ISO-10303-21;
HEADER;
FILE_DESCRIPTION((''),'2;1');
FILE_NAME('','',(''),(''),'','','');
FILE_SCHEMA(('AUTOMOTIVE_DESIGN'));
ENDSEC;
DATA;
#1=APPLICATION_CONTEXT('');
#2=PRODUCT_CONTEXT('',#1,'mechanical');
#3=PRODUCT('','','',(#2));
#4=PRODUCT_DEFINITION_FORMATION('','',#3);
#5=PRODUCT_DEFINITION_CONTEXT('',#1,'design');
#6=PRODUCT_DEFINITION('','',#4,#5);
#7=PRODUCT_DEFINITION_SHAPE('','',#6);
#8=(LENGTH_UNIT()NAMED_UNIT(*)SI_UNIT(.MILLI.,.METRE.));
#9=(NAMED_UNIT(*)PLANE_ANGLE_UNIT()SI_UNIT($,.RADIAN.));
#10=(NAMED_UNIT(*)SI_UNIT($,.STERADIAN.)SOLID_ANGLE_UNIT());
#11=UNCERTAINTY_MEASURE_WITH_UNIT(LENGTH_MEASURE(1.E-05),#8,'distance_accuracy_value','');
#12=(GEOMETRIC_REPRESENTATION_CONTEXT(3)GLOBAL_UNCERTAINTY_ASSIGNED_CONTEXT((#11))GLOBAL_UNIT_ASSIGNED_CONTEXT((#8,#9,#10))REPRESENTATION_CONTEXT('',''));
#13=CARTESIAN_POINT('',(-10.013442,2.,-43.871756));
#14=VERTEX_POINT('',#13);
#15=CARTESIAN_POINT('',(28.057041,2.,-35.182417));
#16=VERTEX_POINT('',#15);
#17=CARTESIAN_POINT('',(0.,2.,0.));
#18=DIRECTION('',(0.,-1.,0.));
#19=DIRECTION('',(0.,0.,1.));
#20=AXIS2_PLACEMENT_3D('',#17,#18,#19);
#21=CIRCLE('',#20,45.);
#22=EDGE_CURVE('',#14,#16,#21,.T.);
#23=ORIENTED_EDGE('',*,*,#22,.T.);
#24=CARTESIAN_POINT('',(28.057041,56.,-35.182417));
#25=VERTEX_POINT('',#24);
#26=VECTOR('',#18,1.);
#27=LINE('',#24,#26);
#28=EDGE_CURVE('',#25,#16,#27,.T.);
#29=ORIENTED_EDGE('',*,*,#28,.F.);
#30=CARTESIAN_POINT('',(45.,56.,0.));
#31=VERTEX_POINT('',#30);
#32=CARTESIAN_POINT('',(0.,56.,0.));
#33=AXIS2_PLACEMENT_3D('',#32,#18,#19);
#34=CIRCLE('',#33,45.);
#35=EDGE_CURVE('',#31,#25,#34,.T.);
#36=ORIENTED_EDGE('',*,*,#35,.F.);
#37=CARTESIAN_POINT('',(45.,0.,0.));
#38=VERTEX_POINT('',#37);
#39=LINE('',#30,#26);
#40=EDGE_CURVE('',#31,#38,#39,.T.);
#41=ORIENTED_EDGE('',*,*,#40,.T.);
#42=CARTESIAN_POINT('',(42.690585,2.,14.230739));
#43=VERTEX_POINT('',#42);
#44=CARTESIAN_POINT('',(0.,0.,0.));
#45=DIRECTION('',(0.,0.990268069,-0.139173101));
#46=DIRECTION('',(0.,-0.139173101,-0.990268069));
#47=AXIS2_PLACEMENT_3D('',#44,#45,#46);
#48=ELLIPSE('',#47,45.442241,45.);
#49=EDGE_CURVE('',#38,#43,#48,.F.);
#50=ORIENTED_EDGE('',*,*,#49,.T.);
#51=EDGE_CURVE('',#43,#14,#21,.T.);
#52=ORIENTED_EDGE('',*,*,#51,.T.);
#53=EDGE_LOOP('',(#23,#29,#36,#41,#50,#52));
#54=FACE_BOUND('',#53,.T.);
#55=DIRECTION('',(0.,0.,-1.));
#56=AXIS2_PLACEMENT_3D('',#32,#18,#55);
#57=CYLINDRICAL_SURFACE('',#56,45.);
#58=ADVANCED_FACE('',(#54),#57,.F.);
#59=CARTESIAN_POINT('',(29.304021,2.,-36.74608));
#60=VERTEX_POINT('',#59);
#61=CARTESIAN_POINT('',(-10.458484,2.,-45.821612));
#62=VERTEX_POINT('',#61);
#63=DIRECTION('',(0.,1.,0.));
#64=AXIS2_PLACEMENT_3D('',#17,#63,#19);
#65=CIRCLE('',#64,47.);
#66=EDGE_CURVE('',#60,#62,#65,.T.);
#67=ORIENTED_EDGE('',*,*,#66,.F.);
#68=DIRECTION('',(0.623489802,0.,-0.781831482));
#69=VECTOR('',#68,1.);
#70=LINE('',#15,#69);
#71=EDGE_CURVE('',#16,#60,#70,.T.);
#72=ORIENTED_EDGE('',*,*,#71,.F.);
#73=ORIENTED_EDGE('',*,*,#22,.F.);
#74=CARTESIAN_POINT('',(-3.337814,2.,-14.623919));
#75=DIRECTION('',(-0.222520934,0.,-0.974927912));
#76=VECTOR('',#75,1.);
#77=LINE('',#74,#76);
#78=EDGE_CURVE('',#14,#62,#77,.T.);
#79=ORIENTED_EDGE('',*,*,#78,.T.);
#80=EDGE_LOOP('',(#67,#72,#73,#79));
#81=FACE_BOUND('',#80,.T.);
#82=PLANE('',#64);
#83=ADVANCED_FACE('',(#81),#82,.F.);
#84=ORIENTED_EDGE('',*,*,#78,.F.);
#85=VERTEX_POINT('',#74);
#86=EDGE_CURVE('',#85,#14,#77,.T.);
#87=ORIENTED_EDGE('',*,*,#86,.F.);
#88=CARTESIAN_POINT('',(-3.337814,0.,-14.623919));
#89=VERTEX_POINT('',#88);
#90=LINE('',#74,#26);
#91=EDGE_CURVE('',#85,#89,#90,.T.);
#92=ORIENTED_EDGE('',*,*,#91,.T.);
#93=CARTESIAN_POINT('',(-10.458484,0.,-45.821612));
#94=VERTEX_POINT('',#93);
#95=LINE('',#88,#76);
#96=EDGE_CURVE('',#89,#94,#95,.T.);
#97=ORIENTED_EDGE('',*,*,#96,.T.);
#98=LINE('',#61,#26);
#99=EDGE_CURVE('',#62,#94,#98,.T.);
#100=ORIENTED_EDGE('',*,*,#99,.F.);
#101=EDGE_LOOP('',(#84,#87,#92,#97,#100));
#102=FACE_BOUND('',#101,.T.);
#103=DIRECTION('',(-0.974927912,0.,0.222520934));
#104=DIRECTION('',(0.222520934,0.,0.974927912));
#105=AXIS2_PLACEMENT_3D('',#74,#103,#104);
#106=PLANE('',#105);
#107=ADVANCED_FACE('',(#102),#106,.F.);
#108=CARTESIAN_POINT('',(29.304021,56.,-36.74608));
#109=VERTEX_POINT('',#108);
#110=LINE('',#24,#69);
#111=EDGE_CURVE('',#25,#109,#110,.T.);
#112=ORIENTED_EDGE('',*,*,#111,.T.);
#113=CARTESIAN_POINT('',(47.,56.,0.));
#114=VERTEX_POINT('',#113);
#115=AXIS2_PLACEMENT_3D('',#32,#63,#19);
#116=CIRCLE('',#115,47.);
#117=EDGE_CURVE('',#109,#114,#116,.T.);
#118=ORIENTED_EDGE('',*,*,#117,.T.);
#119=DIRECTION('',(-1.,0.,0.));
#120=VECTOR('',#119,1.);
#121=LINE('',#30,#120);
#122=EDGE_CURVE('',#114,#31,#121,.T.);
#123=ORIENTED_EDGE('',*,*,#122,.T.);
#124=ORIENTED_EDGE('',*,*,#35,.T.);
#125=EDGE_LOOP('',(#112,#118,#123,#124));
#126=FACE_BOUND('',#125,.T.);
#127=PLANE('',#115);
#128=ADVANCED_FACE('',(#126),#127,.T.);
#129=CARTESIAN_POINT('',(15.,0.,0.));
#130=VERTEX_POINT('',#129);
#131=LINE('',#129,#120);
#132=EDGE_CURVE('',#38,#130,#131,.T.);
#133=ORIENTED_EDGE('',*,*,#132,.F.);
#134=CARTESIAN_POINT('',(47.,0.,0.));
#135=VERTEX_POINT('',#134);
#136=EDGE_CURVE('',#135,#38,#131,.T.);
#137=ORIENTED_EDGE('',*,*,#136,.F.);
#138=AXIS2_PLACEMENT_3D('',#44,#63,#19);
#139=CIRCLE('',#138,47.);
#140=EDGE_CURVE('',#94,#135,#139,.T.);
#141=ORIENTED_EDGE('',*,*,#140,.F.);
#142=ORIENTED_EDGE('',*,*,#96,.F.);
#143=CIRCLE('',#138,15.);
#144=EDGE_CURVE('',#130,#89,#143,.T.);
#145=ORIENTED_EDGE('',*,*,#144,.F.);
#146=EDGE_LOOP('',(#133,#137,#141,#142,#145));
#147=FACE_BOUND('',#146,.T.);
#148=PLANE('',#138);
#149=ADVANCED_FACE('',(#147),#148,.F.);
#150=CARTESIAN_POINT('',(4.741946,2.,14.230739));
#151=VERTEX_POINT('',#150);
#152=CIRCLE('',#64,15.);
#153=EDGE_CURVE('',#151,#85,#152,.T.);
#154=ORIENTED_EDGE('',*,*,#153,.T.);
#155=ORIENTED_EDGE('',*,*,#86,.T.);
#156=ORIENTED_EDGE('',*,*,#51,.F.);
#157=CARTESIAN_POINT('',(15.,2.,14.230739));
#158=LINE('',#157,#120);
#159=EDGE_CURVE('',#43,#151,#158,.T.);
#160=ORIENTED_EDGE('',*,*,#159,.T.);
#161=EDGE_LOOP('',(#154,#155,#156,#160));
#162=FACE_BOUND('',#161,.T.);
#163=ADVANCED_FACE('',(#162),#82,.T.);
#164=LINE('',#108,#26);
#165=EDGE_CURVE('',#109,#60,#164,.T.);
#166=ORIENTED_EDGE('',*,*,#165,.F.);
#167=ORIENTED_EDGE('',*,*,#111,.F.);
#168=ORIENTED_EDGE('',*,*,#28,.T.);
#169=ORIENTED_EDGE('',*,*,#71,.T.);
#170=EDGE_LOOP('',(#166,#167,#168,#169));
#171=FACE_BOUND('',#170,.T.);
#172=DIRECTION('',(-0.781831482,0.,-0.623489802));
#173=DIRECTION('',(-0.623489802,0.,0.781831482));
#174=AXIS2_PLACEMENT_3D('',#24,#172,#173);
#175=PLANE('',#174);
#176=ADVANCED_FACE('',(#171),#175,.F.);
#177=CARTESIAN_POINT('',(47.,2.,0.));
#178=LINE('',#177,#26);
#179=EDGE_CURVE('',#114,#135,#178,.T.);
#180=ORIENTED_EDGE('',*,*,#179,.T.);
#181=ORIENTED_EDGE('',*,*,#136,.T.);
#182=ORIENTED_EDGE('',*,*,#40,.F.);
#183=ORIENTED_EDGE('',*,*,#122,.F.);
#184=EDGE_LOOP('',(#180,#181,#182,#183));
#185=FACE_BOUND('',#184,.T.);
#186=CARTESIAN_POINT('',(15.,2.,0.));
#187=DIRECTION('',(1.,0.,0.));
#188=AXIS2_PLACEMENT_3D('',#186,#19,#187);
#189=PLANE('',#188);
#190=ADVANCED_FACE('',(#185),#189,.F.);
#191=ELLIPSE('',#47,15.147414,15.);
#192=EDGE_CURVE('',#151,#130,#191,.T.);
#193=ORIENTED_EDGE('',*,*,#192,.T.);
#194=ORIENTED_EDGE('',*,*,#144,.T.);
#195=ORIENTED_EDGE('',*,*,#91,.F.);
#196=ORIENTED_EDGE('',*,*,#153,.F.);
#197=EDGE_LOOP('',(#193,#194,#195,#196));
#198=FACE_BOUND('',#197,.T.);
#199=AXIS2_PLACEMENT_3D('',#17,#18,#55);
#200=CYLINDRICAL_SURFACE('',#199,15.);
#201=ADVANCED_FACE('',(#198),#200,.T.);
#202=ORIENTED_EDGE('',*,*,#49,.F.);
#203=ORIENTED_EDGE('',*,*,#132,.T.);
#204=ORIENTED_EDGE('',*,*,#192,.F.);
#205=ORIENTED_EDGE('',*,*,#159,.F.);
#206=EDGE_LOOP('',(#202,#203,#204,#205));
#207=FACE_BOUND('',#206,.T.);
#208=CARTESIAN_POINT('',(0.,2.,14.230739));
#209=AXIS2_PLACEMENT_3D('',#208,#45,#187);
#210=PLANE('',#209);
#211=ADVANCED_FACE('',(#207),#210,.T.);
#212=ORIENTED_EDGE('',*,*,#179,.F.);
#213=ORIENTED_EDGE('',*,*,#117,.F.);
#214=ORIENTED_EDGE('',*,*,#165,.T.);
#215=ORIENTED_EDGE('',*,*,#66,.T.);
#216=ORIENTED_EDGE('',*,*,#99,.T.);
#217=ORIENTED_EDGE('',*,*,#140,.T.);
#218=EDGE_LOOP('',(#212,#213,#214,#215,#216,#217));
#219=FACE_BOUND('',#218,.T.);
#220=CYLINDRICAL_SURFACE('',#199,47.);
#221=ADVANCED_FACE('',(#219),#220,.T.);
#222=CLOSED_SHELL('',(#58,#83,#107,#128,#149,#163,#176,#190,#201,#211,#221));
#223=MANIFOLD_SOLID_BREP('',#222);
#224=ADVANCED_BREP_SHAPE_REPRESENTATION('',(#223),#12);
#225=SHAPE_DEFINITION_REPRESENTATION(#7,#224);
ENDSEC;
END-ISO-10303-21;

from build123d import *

# Parameters (mm, degrees)
BOSS_EXTRUDE1_DEPTH = 2
BOSS_EXTRUDE2_DEPTH = 54
CHAMFER1_SIZE2      = 14.230739445
CHAMFER1_SIZE       = 2


with BuildPart() as part:
    # Sketch1 → Boss-Extrude1 (new body)
    with BuildSketch(Plane(origin=(0, 0, 0), x_dir=(1, 0, 0), z_dir=(0, 1, 0))):
        with BuildLine():
            Line((-3.337814009, 14.623918683), (-10.458483896, 45.821611873))
            ThreePointArc((-10.458483896, 45.821611873), (-29.304020687, -36.746079676), (47, 0))
            Line((47, 0), (15, 0))
            ThreePointArc((15, 0), (9.352347028, 11.727472237), (-3.337814009, 14.623918683))
        make_face()
    extrude(amount=BOSS_EXTRUDE1_DEPTH)

    # Sketch2 → Boss-Extrude2 (add)
    with BuildSketch(Plane(origin=(0, 2, 0), x_dir=(1, 0, 0), z_dir=(0, 1, 0))):
        with BuildLine():
            Line((28.057041084, 35.182416711), (29.304020687, 36.746079676))
            ThreePointArc((29.304020687, 36.746079676), (-42.345536791, -20.392535739), (47, 0))
            Line((47, 0), (45, 0))
            ThreePointArc((45, 0), (-40.543599056, -19.52476826), (28.057041084, 35.182416711))
        make_face()
    extrude(amount=BOSS_EXTRUDE2_DEPTH)

    # Chamfer1
    chamfer1_edges = [part.edges().sort_by_distance(p)[0] for p in [
        (30, 2, 0),
    ]]
    chamfer1_side = [part.faces().sort_by_distance(p)[0] for p in [
        (30, 1.96, 0),
    ]]
    chamfer(chamfer1_edges, length=CHAMFER1_SIZE - 0.0001, length2=CHAMFER1_SIZE2 - 0.0001, reference=chamfer1_side[0])  # a hair under: the kernel refuses the full size


solid = part.part
